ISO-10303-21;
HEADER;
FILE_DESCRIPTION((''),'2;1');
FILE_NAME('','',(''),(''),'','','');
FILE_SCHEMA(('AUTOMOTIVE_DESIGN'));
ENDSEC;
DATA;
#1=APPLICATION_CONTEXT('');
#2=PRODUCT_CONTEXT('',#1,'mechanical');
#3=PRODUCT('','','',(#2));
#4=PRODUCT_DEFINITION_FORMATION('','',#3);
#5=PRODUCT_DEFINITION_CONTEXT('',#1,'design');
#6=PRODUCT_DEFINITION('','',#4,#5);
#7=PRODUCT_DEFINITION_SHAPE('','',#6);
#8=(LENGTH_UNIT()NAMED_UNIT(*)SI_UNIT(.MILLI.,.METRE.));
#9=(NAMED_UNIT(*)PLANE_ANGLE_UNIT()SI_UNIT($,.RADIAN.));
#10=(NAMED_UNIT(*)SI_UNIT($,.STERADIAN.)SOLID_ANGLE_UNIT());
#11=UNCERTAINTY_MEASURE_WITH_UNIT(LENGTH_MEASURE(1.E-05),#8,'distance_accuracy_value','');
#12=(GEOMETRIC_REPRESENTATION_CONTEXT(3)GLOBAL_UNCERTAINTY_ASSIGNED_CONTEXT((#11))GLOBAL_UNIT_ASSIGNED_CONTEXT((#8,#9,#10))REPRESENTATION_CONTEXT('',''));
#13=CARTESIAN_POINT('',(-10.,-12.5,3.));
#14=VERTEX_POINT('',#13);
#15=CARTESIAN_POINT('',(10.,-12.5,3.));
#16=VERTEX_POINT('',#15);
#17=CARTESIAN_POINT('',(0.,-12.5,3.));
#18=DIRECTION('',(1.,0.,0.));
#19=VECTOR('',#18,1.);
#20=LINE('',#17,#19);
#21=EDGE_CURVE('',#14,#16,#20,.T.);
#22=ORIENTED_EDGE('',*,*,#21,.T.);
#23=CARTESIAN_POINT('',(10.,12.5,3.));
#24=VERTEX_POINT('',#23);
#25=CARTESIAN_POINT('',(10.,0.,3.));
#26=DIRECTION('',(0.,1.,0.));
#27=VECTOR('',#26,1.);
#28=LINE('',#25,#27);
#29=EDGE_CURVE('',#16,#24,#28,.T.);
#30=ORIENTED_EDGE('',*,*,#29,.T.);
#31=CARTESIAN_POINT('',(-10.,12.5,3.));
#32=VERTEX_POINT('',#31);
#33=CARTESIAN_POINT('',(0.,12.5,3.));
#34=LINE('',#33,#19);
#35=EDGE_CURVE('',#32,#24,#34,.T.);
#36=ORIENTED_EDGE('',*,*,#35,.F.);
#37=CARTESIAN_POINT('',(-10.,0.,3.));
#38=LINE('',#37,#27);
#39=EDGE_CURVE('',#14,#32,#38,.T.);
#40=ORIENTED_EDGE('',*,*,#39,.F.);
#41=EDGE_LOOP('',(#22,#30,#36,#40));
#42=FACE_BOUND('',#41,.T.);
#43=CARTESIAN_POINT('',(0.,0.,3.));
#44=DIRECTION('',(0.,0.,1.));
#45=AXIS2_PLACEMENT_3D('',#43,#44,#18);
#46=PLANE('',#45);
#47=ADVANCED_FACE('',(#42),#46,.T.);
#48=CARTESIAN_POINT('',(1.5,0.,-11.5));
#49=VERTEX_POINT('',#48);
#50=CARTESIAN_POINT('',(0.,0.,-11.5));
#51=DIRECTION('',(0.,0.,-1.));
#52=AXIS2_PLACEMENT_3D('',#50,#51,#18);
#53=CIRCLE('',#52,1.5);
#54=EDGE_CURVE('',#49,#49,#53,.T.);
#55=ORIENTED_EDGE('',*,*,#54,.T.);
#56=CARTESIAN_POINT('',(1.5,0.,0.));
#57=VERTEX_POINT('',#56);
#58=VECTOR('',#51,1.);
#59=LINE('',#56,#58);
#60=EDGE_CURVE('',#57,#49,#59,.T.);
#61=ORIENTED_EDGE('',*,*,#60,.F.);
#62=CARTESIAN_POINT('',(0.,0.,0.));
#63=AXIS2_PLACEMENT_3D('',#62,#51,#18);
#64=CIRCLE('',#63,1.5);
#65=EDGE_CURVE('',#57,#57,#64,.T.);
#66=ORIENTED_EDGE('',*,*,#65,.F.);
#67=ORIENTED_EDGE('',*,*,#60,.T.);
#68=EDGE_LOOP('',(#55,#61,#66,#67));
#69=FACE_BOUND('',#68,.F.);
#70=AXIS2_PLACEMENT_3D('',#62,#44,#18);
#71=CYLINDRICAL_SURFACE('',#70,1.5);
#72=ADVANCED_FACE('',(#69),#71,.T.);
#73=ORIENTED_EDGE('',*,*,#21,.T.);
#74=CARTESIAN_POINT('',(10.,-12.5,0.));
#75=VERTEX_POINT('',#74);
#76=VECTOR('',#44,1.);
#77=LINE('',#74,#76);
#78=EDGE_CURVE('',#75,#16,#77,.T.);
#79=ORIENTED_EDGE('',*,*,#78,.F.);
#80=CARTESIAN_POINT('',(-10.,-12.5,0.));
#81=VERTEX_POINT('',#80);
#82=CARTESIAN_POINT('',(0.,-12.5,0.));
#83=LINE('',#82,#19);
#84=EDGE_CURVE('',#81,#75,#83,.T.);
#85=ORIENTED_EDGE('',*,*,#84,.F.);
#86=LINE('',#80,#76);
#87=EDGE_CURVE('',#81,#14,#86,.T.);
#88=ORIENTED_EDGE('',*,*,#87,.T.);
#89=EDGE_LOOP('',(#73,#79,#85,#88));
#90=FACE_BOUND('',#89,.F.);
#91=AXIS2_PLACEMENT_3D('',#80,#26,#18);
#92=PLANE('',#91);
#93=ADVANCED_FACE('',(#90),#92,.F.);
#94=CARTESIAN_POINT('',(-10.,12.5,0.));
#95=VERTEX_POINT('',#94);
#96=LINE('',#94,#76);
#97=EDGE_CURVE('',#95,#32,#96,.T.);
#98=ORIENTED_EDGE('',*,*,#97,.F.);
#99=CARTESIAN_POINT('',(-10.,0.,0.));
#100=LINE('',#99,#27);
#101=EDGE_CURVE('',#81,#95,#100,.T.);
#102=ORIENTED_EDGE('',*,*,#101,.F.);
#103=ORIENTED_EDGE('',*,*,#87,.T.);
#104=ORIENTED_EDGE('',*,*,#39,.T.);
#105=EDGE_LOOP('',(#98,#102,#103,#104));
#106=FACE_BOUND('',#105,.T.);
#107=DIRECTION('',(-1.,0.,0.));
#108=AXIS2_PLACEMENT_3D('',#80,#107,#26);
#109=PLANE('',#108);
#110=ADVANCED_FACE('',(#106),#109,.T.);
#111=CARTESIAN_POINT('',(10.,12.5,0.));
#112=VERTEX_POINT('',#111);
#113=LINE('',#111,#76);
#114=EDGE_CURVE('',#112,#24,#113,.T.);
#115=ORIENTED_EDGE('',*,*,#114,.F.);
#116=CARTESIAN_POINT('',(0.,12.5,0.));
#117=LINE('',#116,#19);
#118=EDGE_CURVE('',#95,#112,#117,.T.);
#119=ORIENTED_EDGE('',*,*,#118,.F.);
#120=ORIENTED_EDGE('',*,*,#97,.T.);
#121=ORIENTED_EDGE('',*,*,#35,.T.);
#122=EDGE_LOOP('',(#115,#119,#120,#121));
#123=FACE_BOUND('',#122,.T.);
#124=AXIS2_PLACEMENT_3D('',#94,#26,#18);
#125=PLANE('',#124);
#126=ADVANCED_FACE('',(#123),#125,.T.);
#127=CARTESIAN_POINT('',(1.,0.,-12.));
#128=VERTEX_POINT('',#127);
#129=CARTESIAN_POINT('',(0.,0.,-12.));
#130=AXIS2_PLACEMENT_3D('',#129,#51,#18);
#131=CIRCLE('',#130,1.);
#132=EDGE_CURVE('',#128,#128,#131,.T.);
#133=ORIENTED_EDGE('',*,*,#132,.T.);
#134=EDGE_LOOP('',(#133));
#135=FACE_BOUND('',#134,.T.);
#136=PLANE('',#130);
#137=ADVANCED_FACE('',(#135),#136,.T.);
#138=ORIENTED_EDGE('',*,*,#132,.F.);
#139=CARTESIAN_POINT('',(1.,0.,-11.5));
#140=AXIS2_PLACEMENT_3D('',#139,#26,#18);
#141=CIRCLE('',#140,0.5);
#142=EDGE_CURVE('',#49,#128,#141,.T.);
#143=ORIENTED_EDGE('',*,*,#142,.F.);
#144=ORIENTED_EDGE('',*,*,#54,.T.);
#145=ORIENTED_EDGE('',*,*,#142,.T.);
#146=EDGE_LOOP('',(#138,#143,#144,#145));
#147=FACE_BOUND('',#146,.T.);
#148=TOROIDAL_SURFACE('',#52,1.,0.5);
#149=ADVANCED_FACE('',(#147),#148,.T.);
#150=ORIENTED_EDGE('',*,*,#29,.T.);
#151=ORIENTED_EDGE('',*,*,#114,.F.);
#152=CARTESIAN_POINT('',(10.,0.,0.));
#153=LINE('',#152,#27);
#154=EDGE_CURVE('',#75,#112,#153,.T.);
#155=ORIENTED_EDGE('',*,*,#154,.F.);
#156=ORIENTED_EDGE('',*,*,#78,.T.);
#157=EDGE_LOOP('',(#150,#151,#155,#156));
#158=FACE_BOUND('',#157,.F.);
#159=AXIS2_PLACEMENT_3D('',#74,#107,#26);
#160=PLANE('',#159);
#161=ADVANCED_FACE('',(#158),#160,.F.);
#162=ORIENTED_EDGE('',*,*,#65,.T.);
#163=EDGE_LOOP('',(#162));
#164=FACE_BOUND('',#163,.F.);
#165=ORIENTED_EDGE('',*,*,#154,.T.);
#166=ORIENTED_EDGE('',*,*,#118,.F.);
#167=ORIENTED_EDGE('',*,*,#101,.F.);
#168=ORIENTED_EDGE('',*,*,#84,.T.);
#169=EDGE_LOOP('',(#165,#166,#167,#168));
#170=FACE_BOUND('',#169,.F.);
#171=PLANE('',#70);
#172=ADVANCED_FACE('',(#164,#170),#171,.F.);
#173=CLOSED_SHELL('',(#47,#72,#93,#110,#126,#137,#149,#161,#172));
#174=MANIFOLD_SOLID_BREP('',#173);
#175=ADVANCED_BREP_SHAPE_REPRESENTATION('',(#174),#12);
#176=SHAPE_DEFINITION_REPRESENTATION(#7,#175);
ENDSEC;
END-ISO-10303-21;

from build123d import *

# Parameters (mm, degrees)
F1_W     = 20
F1_H     = 25
F2_DEPTH = 3
F3_R     = 1.5
F4_DEPTH = 12
F0_R     = 0.5


with BuildPart() as f2:
    # F1 (on Top) → F2 (new body)
    with BuildSketch(Plane.XY):
        Rectangle(F1_W, F1_H)
    extrude(amount=F2_DEPTH)

    # F3 (on face) → F4 (join)
    with BuildSketch(Plane(origin=(0, 0, 0), x_dir=(1, 0, 0), z_dir=(0, 0, -1))):
        Circle(F3_R)
    extrude(amount=F4_DEPTH)

    # F0
    f0_edges = [f2.edges().sort_by_distance(p)[0] for p in [
        (-1.5, 0, -12),
    ]]
    fillet(f0_edges, radius=F0_R)


solid = f2.part
